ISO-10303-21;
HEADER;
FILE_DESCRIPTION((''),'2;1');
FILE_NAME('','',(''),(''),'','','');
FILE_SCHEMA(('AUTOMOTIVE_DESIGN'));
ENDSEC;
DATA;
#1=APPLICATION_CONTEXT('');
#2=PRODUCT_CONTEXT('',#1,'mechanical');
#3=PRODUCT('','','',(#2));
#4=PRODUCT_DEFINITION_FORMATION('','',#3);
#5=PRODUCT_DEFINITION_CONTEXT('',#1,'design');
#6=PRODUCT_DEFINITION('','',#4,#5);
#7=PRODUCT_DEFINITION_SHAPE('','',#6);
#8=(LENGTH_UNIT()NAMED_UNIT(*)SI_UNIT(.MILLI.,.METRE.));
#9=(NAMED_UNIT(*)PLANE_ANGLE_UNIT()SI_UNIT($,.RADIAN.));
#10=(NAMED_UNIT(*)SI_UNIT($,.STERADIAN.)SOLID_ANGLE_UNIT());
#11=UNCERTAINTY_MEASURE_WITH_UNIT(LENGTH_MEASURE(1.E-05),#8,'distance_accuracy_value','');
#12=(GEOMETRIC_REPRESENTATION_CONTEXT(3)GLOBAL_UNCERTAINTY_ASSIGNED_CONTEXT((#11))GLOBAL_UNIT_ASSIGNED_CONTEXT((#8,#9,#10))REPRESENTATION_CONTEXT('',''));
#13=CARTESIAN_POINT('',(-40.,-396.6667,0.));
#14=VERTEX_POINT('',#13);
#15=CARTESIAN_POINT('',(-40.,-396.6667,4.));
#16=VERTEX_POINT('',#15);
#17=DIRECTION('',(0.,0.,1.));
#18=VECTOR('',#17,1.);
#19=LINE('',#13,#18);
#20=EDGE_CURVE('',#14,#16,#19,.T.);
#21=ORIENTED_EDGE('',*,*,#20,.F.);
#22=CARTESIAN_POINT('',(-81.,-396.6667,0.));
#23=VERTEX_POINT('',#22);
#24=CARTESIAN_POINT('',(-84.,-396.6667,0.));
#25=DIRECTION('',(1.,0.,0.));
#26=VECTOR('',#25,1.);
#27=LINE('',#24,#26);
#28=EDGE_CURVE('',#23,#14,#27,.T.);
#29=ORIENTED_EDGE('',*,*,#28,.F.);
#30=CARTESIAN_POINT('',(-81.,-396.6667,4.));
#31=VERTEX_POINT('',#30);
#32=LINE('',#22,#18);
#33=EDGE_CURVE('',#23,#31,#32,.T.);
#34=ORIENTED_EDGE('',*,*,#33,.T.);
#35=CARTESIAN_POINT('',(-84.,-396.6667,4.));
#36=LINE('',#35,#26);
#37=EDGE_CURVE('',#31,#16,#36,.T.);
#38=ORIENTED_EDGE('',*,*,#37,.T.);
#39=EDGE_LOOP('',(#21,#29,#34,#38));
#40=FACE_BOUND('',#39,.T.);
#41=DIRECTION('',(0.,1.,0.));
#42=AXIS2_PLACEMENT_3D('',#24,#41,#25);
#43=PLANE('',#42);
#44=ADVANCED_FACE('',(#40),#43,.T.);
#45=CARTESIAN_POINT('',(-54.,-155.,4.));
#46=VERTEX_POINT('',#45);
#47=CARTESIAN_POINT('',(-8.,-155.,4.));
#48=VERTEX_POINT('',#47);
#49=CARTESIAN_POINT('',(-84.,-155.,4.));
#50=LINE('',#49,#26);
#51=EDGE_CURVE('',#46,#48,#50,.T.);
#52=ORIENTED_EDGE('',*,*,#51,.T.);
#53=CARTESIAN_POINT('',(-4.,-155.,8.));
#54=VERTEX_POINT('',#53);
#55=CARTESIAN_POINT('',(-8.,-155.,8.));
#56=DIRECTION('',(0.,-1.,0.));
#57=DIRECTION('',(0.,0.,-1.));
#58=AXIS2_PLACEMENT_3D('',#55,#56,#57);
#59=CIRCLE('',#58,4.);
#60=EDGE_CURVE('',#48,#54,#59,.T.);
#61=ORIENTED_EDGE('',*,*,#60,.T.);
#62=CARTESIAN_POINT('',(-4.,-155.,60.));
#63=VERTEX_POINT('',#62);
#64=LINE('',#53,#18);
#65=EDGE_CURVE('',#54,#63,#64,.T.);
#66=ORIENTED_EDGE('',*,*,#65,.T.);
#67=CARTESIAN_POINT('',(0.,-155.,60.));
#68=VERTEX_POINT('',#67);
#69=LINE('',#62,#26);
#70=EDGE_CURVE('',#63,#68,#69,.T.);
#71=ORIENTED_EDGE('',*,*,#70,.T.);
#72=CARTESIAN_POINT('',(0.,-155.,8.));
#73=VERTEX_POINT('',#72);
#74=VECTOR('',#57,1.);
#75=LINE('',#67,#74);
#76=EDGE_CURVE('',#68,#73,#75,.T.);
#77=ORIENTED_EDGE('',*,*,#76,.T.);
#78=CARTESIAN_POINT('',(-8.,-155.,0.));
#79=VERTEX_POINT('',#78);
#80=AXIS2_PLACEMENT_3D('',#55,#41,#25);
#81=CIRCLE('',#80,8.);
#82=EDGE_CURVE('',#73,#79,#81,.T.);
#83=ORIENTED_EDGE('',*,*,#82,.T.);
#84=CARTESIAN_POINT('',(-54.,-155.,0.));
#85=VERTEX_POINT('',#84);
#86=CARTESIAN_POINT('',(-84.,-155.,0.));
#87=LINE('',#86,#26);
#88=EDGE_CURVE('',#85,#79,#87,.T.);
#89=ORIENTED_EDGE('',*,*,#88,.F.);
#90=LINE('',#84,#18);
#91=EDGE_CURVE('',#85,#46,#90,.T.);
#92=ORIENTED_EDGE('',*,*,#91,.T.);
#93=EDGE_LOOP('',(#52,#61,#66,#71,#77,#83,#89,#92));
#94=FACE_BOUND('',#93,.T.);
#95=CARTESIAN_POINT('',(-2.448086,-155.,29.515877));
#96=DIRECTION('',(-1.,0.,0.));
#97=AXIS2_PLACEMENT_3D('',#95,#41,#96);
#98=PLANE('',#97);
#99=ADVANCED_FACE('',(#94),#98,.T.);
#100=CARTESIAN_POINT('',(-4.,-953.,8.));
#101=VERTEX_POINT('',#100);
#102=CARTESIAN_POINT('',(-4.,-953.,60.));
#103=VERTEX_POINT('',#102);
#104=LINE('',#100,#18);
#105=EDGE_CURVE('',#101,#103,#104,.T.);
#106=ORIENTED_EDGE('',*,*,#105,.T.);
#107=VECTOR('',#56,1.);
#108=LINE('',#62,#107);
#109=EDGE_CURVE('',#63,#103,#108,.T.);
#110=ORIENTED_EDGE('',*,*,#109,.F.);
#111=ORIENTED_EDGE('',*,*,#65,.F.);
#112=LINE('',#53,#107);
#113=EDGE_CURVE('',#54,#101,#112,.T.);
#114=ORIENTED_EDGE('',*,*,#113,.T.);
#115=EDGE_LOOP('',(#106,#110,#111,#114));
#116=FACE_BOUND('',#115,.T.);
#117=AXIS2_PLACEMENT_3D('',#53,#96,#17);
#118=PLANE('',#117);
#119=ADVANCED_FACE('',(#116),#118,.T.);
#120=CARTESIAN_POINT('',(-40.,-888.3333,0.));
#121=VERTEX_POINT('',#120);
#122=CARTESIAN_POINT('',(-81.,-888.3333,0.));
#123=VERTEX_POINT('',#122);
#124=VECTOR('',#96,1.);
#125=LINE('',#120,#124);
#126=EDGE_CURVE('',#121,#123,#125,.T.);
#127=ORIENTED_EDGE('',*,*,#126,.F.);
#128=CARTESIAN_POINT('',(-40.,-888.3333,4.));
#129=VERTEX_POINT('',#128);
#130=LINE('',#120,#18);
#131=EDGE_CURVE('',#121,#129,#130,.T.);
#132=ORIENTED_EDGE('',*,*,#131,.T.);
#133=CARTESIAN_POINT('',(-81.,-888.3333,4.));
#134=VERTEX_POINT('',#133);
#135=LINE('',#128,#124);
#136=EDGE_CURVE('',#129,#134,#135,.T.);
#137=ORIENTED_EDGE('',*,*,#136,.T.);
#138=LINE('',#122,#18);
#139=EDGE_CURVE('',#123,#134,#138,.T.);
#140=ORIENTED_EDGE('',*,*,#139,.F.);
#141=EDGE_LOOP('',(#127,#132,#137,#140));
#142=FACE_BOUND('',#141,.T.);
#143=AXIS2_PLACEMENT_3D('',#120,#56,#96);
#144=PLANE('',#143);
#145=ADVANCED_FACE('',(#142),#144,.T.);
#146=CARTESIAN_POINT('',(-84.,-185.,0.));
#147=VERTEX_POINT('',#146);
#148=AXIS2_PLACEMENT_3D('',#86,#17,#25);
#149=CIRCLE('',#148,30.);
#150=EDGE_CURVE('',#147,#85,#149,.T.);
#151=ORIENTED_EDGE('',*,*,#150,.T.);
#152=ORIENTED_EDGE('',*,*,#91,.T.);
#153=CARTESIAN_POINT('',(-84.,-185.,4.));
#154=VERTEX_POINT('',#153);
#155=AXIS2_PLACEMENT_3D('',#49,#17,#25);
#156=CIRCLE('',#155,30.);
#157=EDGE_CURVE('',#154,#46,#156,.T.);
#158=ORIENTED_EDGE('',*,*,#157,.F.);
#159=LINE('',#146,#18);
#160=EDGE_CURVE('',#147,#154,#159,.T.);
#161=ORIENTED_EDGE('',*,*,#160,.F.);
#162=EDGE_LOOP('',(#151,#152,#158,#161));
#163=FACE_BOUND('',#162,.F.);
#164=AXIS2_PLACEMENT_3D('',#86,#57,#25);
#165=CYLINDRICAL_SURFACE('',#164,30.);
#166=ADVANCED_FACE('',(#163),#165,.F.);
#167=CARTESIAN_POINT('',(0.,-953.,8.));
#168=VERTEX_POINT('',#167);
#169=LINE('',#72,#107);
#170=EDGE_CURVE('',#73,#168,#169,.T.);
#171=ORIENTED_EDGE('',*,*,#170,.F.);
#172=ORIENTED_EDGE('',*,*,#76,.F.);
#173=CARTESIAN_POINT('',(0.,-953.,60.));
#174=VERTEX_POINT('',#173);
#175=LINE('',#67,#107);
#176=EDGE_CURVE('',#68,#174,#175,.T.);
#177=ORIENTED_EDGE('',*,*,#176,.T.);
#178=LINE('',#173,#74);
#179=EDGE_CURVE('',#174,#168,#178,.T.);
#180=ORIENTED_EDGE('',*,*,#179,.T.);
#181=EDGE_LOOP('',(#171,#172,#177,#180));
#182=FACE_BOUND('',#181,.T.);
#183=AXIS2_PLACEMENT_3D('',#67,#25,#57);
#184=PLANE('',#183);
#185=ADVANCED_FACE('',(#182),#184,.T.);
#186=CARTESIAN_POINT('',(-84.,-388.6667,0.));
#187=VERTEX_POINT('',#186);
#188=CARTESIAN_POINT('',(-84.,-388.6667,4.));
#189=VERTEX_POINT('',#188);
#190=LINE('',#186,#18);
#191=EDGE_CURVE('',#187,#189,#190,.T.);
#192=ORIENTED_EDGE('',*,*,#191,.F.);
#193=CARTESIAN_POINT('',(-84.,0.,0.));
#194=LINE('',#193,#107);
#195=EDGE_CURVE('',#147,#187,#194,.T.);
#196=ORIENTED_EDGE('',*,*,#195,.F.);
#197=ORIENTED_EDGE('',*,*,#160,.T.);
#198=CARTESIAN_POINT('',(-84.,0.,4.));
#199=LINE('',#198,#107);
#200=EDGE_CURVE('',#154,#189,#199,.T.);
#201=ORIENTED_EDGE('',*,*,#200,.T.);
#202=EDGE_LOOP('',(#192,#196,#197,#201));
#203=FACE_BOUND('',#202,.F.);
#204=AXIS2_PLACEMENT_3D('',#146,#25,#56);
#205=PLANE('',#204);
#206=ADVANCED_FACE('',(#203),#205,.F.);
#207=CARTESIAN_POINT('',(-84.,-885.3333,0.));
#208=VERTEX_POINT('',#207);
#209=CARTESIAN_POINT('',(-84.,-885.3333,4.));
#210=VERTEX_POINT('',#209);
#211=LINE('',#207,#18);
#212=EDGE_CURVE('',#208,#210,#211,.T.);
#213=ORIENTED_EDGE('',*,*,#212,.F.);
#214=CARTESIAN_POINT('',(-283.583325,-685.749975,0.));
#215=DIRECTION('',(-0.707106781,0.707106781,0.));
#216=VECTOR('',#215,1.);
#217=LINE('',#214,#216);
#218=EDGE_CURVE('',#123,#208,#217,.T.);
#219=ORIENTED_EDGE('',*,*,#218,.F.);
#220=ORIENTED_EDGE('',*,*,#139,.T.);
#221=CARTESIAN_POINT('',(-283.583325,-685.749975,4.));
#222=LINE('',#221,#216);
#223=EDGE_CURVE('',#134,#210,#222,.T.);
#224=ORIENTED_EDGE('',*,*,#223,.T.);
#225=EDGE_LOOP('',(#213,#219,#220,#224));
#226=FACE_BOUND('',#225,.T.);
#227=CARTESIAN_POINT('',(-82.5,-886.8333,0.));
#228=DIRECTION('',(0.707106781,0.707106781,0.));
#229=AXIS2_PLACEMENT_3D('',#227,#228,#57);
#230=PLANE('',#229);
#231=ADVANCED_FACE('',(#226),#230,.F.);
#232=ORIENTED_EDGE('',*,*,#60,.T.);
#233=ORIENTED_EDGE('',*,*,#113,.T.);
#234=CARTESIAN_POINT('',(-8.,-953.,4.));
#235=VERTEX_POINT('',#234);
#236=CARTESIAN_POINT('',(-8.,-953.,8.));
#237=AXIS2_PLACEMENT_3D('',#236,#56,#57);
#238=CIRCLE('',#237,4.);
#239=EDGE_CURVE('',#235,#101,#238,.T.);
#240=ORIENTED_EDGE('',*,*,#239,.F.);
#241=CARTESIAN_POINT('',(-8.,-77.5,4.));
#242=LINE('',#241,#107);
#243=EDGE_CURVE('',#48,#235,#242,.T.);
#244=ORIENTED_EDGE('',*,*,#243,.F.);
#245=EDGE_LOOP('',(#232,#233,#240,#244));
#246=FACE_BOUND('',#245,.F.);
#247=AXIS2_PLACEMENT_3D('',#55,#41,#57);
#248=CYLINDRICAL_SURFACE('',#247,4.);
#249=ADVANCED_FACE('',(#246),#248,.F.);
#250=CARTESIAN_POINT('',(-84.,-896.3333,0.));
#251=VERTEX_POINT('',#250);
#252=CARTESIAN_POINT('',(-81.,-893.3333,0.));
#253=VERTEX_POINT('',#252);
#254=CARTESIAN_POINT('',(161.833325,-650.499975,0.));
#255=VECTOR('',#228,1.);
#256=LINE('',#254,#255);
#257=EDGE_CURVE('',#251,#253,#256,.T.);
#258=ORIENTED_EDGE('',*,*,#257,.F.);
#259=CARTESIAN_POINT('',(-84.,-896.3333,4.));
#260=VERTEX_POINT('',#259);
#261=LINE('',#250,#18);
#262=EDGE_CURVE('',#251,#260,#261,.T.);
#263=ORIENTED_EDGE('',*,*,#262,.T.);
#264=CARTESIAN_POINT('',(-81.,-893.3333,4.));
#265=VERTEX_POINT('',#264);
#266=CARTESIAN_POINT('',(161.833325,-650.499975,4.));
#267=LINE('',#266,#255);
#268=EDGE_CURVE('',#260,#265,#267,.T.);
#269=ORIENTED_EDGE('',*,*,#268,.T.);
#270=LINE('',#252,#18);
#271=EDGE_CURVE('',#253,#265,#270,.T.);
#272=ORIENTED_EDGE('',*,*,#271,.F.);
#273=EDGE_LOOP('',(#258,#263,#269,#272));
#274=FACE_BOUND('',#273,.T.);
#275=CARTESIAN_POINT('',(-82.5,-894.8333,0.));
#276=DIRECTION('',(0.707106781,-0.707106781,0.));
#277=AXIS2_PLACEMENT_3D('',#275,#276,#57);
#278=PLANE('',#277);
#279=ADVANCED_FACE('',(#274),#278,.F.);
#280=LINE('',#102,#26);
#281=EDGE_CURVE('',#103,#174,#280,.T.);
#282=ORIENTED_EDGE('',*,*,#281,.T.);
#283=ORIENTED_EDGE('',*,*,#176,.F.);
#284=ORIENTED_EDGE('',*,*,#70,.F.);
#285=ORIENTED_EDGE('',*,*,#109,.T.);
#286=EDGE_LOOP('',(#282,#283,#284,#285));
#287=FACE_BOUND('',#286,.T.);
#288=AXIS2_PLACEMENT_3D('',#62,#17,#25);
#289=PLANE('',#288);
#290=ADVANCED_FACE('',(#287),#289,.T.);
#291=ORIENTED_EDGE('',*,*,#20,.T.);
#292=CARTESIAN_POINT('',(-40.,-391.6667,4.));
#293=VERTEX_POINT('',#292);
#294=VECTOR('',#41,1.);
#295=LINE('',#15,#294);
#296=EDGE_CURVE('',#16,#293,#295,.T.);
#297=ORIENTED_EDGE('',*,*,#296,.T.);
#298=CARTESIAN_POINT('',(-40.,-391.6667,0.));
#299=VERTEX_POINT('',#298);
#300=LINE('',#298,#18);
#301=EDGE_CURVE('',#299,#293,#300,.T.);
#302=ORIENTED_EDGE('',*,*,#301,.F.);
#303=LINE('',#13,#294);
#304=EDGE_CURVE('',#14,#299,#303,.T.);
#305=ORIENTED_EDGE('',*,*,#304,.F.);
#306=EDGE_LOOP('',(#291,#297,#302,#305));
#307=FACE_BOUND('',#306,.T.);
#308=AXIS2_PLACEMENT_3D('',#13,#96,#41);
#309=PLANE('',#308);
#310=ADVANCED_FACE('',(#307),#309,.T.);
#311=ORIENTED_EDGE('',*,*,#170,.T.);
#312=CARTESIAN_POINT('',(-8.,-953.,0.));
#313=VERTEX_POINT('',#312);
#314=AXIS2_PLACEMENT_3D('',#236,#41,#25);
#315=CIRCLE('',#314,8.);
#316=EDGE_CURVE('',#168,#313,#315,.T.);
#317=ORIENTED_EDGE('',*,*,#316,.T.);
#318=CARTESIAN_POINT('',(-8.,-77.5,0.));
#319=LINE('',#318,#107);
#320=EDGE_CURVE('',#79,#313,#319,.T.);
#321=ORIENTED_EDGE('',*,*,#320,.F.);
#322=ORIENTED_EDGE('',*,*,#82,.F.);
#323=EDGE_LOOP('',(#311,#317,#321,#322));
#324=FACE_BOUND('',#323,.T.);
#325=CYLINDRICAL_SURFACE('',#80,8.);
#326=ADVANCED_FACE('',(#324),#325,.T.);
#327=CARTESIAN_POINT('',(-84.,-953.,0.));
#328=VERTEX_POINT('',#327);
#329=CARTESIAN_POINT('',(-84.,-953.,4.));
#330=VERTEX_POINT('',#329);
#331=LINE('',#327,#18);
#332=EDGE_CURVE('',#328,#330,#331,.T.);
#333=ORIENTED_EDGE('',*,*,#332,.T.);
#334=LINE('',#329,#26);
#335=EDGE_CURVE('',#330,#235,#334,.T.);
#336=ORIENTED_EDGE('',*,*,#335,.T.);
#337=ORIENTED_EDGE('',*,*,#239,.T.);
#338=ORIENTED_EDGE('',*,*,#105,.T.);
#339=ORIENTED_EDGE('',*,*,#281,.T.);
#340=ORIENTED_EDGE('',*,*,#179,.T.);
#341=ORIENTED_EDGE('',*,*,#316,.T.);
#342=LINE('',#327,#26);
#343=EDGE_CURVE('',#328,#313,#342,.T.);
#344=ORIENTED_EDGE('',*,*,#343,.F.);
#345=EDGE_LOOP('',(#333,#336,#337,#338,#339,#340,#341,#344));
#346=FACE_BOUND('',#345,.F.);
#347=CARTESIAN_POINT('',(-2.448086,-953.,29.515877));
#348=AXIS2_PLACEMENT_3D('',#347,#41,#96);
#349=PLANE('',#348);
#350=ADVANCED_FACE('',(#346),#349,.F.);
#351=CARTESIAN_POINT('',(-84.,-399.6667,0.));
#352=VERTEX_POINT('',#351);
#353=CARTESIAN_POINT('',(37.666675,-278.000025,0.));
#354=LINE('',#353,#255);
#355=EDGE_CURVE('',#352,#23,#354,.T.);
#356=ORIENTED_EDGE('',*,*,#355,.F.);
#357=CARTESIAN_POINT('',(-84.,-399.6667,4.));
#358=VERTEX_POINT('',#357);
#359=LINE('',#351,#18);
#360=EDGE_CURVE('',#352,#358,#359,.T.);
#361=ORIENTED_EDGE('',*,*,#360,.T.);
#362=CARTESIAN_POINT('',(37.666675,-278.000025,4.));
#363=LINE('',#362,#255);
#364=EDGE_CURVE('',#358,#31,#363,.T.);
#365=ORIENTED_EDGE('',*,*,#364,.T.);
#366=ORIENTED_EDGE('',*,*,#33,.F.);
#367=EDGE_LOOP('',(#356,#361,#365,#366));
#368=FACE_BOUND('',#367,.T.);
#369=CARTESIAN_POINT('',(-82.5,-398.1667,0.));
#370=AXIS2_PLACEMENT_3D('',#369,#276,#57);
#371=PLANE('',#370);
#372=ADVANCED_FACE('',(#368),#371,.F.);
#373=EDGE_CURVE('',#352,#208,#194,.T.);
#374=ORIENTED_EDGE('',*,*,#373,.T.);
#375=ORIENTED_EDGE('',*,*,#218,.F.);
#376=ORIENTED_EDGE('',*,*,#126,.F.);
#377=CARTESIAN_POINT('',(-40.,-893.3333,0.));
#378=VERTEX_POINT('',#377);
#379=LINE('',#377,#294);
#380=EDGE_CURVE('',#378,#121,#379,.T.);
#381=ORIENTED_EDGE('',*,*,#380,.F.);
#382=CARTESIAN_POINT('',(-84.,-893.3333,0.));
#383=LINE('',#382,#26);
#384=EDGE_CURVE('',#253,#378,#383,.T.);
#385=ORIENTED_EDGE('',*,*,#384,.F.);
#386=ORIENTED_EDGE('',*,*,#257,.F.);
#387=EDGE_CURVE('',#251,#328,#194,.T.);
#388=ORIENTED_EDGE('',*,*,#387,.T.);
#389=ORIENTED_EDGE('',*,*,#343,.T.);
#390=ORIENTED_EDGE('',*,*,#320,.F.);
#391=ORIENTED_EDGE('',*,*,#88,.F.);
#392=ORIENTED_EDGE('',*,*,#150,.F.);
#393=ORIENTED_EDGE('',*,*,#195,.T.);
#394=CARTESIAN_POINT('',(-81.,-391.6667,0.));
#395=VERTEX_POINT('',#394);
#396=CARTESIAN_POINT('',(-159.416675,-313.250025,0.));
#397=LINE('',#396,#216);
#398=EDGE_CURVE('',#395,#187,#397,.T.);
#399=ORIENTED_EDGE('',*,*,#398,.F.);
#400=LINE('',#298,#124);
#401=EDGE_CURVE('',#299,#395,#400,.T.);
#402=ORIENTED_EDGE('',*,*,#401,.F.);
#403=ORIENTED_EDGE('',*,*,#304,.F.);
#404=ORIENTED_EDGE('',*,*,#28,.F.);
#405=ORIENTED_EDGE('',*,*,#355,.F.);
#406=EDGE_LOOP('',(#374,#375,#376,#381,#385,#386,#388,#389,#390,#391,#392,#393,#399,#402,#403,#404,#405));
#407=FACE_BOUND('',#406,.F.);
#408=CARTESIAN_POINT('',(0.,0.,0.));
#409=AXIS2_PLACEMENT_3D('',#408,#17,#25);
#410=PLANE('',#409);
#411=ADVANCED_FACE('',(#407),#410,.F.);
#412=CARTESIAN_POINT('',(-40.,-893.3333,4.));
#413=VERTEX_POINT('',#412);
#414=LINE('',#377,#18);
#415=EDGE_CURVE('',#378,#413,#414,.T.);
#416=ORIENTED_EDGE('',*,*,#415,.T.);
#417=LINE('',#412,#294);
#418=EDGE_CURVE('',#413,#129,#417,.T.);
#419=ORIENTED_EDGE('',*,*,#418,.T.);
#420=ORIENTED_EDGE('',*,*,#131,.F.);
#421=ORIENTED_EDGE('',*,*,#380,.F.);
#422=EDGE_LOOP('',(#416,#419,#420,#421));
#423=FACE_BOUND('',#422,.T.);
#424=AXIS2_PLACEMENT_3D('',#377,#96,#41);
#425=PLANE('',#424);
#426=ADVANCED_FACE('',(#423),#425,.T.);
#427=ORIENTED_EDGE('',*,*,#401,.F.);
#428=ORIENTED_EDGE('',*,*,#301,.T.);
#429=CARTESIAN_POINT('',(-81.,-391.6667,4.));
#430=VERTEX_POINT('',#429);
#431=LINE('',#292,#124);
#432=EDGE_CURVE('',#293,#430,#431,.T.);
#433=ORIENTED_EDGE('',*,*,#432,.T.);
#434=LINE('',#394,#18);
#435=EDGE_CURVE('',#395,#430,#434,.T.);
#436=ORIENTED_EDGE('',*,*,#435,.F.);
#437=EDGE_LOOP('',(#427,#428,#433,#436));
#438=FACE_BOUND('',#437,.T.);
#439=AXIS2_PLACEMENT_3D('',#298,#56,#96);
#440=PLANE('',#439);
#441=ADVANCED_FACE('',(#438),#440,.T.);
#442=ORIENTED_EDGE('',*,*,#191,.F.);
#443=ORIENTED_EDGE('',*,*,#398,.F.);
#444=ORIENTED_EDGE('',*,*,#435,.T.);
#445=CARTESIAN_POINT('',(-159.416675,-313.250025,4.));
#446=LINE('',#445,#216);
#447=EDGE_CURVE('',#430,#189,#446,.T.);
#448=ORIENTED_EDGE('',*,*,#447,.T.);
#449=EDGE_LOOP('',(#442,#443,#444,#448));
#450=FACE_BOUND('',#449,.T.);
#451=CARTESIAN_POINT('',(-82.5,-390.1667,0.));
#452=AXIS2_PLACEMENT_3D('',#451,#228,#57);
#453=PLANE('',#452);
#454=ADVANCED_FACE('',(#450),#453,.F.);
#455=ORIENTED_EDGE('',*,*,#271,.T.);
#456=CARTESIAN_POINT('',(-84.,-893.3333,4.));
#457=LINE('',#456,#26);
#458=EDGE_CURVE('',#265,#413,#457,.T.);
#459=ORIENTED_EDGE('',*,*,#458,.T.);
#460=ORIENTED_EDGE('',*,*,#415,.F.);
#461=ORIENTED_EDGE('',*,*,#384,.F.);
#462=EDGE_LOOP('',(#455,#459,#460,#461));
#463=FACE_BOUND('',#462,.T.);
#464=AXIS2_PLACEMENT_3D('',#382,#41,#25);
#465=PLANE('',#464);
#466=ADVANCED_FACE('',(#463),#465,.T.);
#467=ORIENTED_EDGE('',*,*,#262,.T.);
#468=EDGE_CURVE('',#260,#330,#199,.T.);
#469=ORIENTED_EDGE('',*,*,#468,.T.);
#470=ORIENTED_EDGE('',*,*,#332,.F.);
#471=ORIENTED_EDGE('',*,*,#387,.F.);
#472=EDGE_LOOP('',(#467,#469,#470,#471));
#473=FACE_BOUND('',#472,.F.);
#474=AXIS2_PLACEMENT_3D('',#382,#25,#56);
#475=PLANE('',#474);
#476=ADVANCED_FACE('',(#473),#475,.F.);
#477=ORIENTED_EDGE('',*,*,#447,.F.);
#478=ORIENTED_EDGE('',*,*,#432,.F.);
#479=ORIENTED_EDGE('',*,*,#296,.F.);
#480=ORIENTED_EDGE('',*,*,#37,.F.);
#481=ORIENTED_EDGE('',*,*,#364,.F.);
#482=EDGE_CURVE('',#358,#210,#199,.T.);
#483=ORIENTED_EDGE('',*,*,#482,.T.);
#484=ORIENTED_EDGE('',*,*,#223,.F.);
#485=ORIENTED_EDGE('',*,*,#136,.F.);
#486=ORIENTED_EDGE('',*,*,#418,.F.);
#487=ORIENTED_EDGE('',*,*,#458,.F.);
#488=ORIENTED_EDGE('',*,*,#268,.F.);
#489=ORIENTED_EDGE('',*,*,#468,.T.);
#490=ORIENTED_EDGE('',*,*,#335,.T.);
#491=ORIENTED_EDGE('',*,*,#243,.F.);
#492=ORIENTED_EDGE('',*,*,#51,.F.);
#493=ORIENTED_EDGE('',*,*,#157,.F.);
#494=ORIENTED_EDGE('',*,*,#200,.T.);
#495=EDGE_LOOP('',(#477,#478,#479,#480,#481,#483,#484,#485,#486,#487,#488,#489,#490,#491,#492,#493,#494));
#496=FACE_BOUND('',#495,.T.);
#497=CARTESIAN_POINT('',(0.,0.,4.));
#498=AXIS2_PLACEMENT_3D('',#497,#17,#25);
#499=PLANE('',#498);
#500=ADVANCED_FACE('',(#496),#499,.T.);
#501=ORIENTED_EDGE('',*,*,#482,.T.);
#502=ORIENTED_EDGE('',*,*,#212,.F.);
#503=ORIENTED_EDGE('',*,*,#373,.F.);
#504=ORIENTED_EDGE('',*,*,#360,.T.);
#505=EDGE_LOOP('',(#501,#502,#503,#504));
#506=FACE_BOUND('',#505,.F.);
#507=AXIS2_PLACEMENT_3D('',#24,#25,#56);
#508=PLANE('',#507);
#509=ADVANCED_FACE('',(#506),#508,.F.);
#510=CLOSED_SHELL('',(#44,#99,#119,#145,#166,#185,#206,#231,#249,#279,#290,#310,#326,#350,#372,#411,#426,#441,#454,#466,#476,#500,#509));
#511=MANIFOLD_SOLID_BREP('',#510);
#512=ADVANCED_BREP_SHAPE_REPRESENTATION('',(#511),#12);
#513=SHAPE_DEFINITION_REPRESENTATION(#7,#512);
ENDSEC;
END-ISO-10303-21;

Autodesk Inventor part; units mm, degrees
ref_plane "YZ Plane" through (0, 0, 0) normal (1, 0, 0) x (0, 1, 0)
ref_plane "XZ Plane" through (0, 0, 0) normal (0, 1, 0) x (-1, 0, 0)
ref_plane "XY Plane" through (0, 0, 0) normal (0, 0, 1) x (1, 0, 0)
sketch "Sketch1" plane through (0, 0, 0) normal (0, 0, 1) x (1, 0, 0)
  line L0 (0, 0) -> (-84, 0)
  line L1 (-84, 0) -> (-84, -1490)
  line L2 (-84, -1490) -> (0, -1490)
  line L3 (0, -1490) -> (0, 0)
  line L4 (-84, -1390) -> (-40, -1390)
  line L5 (-40, -1390) -> (-40, -1385)
  line L6 (-40, -1385) -> (-84, -1385)
  line L7 (-84, -1385) -> (-84, -1390)
  line L8 (-84, -893.3333) -> (-40, -893.3333)
  line L9 (-40, -893.3333) -> (-40, -888.3333)
  line L10 (-40, -888.3333) -> (-84, -888.3333)
  line L11 (-84, -888.3333) -> (-84, -893.3333)
  line L12 (-84, -396.6667) -> (-40, -396.6667)
  line L13 (-40, -396.6667) -> (-40, -391.6667)
  line L14 (-40, -391.6667) -> (-84, -391.6667)
  line L15 (-84, -391.6667) -> (-84, -396.6667)
  circle A0 centre (-84, -155) radius 30
  line L16 (-84, -953) -> (0, -953)
  line L17 (-84, -155) -> (0, -155)
  point P0 (-84, -391.6667)
  point P1 (-84, -396.6667)
  point P2 (-84, -888.3333)
  point P3 (-84, -893.3333)
  point P4 (-84, -1385)
  point P5 (-84, -125)
  point P6 (-84, -185)
  point P7 (-54, -155)
  dimension "d0" = 1490
  dimension "d1" = 84
  dimension "d2" = 5
  dimension "d4" = 100
  dimension "d7" = 496.6667
  dimension "d23" = 40
  dimension "d28" = 60
  dimension "d29" = 1335
  dimension "d30" = 953
extrude "Plate1" add sketch "Sketch1" along normal blind 4 contours L3 L16 L1 L8 L9 L10 L12 L13 L14 A0 L17
sketch "Sketch2" plane through (-4, -155, 0) normal (1, 0, 0) x (0, 1, 0)
  line L0 (-798, 0) -> (0, 0)
  line L1 (0, 0) -> (0, 60)
  line L2 (0, 60) -> (-798, 60)
  line L3 (-798, 60) -> (-798, 0)
edge flange "Flange1" height 60 angle 90 thickness 4 bend radius 4 thickness toward (1, 0, 0) relief tear relief width 4 relief depth 2 edges at (0, -554, 4) wall of the first edge with corners at (-4, -953, 0) (-4, -155, 0) (-4, -155, 60) (-4, -953, 60)
bend "Bend1"
corner "Corner1"
chamfer "Corner Chamfer1" distance 3 angle 45 4 edges at (-84, -893.3333, 2) (-84, -888.3333, 2) (-84, -391.6667, 2) (-84, -396.6667, 2)
equation "\"d0\" = Стрингер_длина"
equation "\"d2\" = паз_под_стрингер_толщина"
equation "\"d7\" = Шаг_шпангоутов"
equation "\"d28\" = 2 * радиус_выреза_под_сварку"
equation "\"d12\" = Thickness"
equation "\"d13\" = BendReliefWidth"
equation "\"d14\" = BendReliefDepth"
equation "\"d15\" = MinimumRemnant"
equation "\"d16\" = TransitionRadius"
equation "\"d17\" = ребро_усилителей"
equation "\"d19\" = BendRadius"
equation "\"d20\" = CornerReliefSize"
equation "\"d21\" = GapSize"
equation "\"d22\" = JacobiRadiusSize"
equation "\"BendRadius\" = Thickness"
equation "\"BendReliefWidth\" = Thickness"
equation "\"BendReliefDepth\" = 0.5 * Thickness"
equation "\"CornerReliefSize\" = 4 * Thickness"
equation "\"MinimumRemnant\" = 2 * Thickness"
equation "\"TransitionRadius\" = BendRadius"
equation "\"JacobiRadiusSize\" = BendRadius"
equation "\"GapSize\" = Thickness"
equation "\"Стрингер_длина\" = 1490"
equation "\"паз_под_стрингер_толщина\" = 5"
equation "\"Шаг_шпангоутов\" = 496.666667"
equation "\"радиус_выреза_под_сварку\" = 30"
equation "\"Thickness\" = 4"
equation "\"ребро_усилителей\" = 60"
properties part number "GBK 0104 stringer 3_Dummy" material "Steel"
